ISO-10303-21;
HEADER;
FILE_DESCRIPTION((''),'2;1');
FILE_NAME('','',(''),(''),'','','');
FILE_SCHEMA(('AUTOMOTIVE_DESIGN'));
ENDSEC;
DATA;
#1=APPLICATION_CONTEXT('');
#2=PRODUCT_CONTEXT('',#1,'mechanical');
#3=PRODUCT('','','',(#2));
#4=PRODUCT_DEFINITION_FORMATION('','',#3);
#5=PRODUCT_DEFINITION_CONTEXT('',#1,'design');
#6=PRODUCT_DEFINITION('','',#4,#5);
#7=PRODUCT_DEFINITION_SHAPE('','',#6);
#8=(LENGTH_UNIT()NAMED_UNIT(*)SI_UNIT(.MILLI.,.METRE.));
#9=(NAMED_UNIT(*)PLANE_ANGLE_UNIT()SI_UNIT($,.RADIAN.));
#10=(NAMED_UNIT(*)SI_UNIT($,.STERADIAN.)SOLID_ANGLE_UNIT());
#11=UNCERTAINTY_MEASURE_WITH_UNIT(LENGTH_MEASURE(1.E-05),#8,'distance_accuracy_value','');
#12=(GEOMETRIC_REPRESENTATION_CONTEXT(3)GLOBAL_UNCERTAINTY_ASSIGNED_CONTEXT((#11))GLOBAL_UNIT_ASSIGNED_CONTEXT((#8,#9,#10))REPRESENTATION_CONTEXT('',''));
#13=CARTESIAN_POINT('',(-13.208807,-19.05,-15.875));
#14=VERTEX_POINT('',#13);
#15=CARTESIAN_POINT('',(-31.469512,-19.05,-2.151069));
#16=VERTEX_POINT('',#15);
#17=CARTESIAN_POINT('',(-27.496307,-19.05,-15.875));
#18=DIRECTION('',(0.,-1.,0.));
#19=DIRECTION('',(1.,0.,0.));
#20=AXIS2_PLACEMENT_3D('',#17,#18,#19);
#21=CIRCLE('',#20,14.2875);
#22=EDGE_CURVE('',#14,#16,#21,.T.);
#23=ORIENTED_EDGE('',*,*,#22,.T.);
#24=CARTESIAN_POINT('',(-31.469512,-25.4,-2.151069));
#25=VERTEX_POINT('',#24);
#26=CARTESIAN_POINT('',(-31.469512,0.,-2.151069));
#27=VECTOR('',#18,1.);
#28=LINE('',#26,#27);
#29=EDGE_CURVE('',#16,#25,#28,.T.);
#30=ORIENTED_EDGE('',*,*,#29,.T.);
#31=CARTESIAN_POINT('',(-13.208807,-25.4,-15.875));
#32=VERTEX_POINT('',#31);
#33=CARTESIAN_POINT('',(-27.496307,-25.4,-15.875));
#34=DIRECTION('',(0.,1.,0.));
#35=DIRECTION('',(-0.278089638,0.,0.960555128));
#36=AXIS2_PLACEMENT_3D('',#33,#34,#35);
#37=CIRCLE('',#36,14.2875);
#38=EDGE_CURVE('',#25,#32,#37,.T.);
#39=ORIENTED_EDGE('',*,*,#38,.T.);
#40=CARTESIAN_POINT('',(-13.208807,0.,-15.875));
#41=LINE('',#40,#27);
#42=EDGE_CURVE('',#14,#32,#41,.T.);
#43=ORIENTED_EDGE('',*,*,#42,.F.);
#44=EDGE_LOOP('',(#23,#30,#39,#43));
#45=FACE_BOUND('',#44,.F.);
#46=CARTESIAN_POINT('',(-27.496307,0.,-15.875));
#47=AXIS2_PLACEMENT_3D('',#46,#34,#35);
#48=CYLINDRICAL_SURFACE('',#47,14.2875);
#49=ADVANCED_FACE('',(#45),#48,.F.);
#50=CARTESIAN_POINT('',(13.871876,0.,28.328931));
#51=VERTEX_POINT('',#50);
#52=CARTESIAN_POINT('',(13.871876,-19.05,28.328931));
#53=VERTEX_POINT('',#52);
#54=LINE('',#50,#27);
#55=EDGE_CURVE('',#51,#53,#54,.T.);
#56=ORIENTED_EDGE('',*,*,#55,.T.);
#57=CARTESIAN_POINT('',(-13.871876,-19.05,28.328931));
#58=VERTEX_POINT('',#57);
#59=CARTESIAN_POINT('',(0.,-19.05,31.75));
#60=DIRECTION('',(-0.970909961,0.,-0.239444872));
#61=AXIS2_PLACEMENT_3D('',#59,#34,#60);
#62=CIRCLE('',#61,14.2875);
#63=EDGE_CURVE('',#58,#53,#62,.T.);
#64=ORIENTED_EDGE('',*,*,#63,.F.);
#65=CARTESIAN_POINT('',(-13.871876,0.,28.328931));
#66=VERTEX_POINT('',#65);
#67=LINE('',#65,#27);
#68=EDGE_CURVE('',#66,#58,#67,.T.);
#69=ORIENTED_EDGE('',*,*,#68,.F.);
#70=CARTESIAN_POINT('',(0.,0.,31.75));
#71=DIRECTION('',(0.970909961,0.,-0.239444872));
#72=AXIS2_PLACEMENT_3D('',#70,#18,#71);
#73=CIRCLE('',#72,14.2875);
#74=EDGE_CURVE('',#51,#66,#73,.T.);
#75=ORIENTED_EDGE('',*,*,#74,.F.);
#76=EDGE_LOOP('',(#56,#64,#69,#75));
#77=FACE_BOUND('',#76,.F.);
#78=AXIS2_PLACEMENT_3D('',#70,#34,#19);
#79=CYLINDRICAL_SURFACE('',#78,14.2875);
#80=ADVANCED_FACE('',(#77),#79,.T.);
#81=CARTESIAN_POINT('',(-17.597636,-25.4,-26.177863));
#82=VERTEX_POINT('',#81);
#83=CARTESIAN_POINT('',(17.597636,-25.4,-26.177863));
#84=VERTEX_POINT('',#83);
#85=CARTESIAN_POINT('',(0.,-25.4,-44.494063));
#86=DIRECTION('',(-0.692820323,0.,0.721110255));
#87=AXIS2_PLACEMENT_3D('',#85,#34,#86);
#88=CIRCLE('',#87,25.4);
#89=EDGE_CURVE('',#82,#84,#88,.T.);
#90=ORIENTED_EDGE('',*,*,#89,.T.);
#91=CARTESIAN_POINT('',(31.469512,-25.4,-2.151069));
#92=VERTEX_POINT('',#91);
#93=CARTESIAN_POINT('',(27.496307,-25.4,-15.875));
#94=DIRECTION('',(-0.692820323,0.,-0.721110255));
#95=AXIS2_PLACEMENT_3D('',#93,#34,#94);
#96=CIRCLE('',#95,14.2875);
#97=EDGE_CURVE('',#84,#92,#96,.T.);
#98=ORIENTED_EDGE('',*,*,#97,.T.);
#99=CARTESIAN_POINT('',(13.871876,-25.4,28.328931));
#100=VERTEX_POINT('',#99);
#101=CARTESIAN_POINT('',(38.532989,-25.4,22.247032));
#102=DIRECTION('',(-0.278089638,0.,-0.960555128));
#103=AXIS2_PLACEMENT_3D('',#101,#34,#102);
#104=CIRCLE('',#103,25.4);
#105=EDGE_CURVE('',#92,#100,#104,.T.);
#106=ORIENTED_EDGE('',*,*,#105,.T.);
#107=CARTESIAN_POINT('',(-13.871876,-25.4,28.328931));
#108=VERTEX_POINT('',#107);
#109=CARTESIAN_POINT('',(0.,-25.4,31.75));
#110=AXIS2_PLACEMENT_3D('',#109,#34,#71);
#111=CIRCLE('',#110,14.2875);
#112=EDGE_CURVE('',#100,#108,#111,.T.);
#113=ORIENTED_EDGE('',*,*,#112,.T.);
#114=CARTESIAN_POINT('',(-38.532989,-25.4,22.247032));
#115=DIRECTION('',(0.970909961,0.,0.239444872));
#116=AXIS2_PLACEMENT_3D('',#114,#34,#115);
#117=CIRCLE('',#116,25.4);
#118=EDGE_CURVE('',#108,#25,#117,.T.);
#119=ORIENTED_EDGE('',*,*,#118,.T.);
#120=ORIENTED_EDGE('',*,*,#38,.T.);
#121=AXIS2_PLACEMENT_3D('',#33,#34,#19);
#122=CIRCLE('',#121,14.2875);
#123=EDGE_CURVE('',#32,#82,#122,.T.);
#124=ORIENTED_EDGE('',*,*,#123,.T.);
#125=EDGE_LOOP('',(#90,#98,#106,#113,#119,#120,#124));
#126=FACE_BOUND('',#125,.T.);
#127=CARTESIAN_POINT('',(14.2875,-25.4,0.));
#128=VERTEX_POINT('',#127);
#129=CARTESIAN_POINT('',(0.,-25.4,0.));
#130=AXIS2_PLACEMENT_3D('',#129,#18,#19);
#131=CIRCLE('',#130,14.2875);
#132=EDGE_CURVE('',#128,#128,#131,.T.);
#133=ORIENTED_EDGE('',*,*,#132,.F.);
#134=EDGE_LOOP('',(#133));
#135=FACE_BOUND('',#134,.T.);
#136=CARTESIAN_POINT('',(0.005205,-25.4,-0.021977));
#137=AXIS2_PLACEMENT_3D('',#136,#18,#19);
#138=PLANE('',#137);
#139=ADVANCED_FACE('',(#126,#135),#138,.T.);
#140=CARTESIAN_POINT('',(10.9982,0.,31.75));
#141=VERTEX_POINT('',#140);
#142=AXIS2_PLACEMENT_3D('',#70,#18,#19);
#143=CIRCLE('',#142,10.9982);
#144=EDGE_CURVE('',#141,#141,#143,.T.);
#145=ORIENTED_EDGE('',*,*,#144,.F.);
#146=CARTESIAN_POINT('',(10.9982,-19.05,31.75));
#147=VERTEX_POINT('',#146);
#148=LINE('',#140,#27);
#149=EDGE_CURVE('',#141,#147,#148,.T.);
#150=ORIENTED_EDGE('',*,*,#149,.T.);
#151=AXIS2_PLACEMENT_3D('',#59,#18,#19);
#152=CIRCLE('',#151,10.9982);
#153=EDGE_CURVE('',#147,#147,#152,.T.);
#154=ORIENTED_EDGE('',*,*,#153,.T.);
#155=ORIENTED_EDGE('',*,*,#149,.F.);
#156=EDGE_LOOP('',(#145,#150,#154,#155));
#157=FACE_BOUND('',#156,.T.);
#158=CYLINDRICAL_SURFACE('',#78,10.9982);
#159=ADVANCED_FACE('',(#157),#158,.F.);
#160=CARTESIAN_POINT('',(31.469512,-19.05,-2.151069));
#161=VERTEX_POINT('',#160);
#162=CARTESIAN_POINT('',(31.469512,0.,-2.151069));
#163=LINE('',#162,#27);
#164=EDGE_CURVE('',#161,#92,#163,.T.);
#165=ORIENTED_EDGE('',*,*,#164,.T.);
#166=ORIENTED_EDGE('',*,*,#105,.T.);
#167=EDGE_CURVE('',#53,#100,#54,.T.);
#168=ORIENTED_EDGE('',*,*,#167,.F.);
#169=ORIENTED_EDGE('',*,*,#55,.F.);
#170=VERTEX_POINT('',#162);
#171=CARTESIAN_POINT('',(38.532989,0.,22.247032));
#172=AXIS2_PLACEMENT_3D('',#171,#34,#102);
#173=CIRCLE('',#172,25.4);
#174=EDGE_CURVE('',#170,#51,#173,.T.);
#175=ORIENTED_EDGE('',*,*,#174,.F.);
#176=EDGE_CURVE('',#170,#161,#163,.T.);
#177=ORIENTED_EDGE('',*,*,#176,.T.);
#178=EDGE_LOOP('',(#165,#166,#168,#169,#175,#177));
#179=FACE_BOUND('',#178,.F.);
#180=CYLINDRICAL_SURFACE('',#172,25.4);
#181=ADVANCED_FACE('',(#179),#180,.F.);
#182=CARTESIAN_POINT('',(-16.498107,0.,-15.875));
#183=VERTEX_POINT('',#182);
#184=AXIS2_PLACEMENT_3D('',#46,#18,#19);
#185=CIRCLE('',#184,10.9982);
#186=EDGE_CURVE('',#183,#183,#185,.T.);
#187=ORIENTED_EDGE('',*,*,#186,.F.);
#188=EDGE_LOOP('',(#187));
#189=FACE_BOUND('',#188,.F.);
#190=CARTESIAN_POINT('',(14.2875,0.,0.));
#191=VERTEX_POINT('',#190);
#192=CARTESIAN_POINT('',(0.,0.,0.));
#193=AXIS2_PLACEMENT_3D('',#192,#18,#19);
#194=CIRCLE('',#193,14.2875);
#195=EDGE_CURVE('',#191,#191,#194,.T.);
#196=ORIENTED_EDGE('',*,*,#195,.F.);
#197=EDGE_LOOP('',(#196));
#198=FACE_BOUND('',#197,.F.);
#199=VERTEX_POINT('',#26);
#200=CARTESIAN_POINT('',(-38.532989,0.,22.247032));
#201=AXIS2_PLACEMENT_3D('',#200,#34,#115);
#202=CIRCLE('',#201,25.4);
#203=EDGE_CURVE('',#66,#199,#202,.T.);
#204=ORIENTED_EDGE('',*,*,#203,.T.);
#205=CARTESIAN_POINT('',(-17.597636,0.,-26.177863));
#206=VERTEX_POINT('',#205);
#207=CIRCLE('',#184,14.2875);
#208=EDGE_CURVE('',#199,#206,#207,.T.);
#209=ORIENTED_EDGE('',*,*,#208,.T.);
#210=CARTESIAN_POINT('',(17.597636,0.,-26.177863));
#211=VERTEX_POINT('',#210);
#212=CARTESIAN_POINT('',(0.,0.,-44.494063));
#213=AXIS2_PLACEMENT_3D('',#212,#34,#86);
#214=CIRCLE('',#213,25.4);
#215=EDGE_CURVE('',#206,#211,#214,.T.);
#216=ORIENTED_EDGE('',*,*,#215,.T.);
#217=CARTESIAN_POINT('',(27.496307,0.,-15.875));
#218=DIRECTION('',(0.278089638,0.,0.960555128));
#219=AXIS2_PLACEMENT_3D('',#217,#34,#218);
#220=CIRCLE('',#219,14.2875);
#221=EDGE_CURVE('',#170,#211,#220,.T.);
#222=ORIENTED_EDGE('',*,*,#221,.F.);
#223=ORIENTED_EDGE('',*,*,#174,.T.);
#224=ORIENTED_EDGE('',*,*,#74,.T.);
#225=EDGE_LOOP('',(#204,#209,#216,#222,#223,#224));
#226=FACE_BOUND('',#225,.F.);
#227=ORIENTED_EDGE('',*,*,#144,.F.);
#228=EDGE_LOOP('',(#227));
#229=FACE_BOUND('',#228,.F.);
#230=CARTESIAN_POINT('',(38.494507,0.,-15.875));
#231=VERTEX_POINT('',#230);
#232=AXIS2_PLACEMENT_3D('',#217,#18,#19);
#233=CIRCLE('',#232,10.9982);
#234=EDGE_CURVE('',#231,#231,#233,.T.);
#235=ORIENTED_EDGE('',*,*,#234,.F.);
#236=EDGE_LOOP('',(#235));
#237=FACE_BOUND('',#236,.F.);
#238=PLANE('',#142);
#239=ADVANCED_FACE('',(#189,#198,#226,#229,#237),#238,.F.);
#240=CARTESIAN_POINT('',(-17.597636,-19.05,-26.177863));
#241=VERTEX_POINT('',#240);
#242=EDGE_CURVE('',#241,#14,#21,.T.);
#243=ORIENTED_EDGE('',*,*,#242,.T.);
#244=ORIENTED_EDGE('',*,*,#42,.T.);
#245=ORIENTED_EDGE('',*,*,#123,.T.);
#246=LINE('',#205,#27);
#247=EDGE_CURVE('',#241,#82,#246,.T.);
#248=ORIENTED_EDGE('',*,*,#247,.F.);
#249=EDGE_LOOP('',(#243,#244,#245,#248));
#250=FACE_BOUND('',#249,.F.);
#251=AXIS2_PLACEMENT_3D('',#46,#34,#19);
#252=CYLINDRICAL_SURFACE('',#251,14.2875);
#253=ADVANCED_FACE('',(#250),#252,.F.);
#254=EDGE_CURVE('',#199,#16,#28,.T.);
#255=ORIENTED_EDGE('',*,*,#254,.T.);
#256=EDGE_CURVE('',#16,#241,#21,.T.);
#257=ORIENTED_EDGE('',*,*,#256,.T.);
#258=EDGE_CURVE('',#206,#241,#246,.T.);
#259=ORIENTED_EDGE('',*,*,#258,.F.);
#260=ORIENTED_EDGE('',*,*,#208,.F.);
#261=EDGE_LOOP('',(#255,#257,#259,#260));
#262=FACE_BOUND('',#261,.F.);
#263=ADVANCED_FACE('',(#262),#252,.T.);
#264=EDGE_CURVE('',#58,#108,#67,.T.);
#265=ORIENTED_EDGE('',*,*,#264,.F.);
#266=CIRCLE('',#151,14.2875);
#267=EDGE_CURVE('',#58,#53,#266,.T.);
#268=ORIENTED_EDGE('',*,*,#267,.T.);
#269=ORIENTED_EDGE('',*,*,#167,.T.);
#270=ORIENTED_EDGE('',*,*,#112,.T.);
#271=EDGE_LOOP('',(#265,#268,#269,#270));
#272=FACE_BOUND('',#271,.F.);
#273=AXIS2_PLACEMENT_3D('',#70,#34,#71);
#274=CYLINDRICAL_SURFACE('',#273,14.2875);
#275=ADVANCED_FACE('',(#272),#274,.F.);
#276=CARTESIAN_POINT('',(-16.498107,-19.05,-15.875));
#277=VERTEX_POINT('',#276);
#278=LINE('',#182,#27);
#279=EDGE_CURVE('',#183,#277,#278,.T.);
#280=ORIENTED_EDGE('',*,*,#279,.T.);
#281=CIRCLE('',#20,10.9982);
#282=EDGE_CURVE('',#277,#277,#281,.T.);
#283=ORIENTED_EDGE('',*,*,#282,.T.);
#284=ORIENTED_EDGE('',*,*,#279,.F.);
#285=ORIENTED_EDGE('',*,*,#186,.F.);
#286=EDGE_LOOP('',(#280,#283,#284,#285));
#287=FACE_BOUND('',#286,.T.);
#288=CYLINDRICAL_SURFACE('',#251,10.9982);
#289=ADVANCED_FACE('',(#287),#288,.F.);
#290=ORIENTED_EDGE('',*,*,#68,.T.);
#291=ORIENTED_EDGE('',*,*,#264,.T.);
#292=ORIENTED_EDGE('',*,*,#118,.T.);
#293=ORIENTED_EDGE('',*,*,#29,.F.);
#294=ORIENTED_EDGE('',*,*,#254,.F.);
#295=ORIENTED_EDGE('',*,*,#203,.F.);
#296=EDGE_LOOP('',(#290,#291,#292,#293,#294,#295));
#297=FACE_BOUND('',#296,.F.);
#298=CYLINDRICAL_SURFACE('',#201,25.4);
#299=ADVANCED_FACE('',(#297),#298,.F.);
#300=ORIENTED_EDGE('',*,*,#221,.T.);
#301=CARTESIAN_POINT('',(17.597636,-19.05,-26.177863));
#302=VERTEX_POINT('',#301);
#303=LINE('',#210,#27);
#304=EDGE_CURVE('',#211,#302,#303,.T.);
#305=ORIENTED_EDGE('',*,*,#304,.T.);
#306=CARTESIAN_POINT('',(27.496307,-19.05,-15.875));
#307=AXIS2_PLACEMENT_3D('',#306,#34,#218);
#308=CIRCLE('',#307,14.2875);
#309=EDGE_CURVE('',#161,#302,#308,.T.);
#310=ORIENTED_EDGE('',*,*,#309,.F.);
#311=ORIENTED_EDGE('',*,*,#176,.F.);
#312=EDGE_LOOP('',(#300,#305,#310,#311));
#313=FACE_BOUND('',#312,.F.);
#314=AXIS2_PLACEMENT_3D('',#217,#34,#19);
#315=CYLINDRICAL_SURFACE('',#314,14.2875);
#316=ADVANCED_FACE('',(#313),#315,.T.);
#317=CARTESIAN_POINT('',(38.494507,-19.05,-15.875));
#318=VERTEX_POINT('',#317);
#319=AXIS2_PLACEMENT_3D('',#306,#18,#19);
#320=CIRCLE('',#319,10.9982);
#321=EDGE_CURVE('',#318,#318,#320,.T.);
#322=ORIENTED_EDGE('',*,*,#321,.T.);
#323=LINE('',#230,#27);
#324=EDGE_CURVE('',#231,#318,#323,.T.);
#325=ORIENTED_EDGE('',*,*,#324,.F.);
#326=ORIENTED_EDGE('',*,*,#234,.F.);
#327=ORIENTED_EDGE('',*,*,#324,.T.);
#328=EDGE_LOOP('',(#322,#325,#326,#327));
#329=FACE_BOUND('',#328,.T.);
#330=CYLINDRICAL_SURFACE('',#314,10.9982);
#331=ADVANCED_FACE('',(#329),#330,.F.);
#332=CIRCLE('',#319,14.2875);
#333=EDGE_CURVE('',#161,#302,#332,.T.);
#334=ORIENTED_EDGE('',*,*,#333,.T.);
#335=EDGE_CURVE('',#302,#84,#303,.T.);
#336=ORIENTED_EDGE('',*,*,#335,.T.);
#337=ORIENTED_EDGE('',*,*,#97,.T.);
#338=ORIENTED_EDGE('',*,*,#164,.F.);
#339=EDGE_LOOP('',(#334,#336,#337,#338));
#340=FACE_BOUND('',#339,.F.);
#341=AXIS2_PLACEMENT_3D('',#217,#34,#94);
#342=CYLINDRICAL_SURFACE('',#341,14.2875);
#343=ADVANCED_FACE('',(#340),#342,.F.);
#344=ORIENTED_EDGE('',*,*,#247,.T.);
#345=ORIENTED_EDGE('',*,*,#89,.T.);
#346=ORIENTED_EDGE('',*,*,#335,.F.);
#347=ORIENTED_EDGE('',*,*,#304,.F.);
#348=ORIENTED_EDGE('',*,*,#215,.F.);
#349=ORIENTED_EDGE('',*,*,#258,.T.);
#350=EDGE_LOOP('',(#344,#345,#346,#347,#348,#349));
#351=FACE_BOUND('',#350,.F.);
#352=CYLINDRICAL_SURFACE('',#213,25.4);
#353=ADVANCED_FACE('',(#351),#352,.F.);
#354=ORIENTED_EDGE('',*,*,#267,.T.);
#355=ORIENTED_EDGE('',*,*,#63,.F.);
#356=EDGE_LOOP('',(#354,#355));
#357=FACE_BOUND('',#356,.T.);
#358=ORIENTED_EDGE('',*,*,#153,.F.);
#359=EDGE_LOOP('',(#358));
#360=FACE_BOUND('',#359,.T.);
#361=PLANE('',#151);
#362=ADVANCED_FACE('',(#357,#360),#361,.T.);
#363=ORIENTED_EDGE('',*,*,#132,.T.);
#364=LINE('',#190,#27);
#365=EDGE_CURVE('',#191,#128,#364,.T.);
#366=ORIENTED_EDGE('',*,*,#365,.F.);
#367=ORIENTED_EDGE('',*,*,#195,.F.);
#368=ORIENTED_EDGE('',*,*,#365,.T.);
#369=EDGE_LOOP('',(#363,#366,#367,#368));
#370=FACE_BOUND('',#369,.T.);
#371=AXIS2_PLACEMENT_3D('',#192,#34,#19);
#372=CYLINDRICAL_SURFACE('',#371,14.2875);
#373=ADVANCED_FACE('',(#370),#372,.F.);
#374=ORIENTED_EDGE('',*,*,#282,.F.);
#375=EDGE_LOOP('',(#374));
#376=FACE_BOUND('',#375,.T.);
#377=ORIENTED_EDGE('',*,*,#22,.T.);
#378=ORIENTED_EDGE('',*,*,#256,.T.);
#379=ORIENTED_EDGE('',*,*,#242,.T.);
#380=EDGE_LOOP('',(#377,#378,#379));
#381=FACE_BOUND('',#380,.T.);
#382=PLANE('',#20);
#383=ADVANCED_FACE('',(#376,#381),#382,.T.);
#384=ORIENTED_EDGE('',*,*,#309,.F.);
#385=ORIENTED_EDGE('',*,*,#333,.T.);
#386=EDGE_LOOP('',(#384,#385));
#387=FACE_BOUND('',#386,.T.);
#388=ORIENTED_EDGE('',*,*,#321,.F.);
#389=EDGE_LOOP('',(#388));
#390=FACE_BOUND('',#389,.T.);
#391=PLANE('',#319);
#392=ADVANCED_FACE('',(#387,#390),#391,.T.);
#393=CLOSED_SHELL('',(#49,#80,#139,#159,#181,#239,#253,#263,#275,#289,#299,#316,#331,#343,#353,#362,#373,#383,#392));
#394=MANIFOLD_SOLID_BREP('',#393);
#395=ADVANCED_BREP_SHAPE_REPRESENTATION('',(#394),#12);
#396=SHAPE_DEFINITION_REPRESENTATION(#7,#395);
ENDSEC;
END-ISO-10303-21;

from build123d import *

# Parameters (mm, degrees)
F1_R     = 14.2875
F2_DEPTH = 25.4
F0_R     = 14.2875
F0_R_2   = 10.9982
F3_DEPTH = 19.05


with BuildPart() as f2:
    # F1 (on Front) → F2 (new body)
    with BuildSketch(Plane.XZ):
        with BuildLine():
            ThreePointArc((13.8718760728, 28.3289313848), (0, 17.4625), (-13.8718760728, 28.3289313848))
            ThreePointArc((-13.8718760728, 28.3289313848), (-16.5359438351, 9.5470316245), (-31.4695122777, -2.1510686152))
            ThreePointArc((-31.4695122777, -2.1510686152), (-18.912441482, -4.4535326513), (-13.2088065702, -15.875))
            ThreePointArc((-13.2088065702, -15.875), (-14.3517276668, -21.4743483284), (-17.5976362049, -26.1778627696))
            ThreePointArc((-17.5976362049, -26.1778627696), (0, -19.094063249), (17.5976362049, -26.1778627696))
            ThreePointArc((17.5976362049, -26.1778627696), (15.1229686136, -8.73125), (31.4695122777, -2.1510686152))
            ThreePointArc((31.4695122777, -2.1510686152), (16.5359438351, 9.5470316245), (13.8718760728, 28.3289313848))
        make_face()
        Circle(F1_R, mode=Mode.SUBTRACT)
    extrude(amount=F2_DEPTH)

    # F0 (on Front) → F3 (join)
    with BuildSketch(Plane.XZ):
        with Locations((0, 31.75)):
            Circle(F0_R)
        with Locations((0, 31.75)):
            Circle(F0_R_2, mode=Mode.SUBTRACT)
        with Locations((27.4963065702, -15.875)):
            Circle(F0_R)
        with Locations((27.4963065702, -15.875)):
            Circle(F0_R_2, mode=Mode.SUBTRACT)
        with Locations((-27.4963065702, -15.875)):
            Circle(F0_R)
        with Locations((-27.4963065702, -15.875)):
            Circle(F0_R_2, mode=Mode.SUBTRACT)
    extrude(amount=F3_DEPTH)


solid = f2.part
